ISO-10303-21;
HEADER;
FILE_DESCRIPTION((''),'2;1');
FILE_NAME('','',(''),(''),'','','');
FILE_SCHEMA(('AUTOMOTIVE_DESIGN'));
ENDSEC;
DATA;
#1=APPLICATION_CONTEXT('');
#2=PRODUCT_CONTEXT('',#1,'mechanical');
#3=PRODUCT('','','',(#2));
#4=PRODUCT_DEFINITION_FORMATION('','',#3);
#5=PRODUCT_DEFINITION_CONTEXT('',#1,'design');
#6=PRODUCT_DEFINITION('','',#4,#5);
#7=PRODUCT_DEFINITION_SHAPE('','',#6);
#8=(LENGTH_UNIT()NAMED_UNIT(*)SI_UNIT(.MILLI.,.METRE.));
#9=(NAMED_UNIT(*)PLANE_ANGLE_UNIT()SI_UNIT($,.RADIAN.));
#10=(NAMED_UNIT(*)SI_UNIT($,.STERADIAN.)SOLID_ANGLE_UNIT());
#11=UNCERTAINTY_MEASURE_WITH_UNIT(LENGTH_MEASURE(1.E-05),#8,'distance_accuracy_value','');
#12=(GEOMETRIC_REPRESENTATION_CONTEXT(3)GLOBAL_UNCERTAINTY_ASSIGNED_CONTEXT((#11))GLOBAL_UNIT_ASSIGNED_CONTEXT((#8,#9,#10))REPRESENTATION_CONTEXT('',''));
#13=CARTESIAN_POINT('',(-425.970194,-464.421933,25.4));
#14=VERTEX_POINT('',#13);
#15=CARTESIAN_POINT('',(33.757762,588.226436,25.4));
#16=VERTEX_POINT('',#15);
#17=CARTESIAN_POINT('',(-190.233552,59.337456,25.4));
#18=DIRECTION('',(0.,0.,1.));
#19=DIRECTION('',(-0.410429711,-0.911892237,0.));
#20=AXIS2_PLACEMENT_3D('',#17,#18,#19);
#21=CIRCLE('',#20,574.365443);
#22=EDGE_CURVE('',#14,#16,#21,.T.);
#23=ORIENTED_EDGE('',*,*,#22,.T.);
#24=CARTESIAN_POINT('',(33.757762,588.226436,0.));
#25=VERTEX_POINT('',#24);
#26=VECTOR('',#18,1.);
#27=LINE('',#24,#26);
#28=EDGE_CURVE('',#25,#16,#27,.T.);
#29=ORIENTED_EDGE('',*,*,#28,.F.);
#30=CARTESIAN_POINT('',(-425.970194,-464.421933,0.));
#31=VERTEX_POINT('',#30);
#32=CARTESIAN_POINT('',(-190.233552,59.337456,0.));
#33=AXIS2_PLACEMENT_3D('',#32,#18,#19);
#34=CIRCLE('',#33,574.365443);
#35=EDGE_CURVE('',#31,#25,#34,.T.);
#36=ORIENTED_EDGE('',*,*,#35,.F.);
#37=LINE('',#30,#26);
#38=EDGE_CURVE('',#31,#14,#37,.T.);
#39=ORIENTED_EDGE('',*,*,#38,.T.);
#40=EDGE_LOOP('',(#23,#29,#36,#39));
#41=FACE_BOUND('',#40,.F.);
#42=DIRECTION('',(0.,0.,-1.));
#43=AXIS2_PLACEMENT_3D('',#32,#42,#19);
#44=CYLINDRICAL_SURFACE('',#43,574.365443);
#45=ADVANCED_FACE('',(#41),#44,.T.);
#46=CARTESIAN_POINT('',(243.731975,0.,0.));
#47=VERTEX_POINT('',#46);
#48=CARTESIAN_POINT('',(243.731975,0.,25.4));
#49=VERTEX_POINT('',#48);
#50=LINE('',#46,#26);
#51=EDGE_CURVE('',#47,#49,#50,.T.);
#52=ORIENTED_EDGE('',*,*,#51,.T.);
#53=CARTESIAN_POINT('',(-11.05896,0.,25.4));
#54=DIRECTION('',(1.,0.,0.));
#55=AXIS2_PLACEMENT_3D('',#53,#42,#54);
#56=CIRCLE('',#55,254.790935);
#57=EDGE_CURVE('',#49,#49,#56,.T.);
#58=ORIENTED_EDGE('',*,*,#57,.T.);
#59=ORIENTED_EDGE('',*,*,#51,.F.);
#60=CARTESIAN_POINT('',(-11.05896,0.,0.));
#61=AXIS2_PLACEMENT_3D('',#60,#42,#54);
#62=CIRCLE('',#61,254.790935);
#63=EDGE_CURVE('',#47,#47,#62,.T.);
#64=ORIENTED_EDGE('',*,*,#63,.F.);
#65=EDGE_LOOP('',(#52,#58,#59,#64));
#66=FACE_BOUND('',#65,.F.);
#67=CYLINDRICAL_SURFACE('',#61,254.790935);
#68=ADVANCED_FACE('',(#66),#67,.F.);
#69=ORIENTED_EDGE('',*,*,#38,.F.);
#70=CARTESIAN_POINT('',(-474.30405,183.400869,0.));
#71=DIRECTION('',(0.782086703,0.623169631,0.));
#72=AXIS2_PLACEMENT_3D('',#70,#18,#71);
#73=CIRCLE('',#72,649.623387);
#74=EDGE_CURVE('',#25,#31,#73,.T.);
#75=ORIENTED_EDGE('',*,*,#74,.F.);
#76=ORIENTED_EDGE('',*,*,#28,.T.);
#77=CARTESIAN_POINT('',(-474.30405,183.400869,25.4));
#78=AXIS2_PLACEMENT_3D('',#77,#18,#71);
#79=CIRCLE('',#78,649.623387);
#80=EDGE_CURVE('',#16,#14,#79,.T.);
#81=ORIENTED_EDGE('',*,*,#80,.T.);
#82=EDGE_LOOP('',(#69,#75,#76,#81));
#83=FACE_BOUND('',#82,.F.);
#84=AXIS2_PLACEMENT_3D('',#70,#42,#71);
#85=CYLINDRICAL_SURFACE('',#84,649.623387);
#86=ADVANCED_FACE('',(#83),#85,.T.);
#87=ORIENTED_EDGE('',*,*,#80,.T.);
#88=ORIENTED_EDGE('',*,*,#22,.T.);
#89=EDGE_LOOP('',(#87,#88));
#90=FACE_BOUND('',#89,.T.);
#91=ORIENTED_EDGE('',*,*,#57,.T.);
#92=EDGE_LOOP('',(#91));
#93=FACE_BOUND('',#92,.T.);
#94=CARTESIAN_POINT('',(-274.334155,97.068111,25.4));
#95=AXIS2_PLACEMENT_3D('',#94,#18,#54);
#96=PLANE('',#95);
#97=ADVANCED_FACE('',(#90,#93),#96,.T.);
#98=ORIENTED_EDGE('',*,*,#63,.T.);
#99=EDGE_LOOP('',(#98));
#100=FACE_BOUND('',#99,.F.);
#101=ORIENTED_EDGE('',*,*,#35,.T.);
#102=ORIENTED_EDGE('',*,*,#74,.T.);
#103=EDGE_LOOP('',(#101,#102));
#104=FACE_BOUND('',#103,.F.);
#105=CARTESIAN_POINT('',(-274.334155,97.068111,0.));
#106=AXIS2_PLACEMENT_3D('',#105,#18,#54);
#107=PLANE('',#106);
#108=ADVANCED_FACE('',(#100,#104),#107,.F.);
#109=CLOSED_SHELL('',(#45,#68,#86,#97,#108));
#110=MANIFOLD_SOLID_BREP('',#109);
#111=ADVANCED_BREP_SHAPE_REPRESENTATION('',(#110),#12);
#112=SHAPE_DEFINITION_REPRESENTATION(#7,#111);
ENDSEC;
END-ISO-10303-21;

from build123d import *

# Parameters (mm, degrees)
F1_DEPTH = 25.4


with BuildPart() as f1:
    # F0 (on Top) → F1 (new body)
    with BuildSketch(Plane.XY):
        with BuildLine():
            ThreePointArc((5.7862824755, -254.2334721202), (-247.959476671, 93.7900080401), (175.2484512465, 173.8043990925))
            ThreePointArc((175.2484512465, 173.8043990925), (175.3016148465, 178.6025033331), (175.3193363689, 183.4008693695))
            ThreePointArc((175.3193363689, 183.4008693695), (138.9085473628, 397.8323376012), (33.7577623302, 588.2264355431))
            ThreePointArc((33.7577623302, 588.2264355431), (-716.5904978529, 289.2157423962), (-425.9701939676, -464.4219325814))
            ThreePointArc((-425.9701939676, -464.4219325814), (-189.9577330386, -400.6862100109), (5.7862824755, -254.2334721202))
        make_face()
        with BuildLine():
            ThreePointArc((175.3193363689, 183.4008693695), (175.3016148465, 178.6025033331), (175.2484512465, 173.8043990925))
            ThreePointArc((175.2484512465, 173.8043990925), (225.9936293263, 93.404981396), (243.7319752101, 0))
            ThreePointArc((243.7319752101, 0), (174.9658175696, -174.1068716602), (5.7862824755, -254.2334721202))
            ThreePointArc((5.7862824755, -254.2334721202), (-189.9577330386, -400.6862100109), (-425.9701939676, -464.4219325814))
            ThreePointArc((-425.9701939676, -464.4219325814), (121.6131099686, -422.9978230177), (384.131890946, 59.3374558464))
            ThreePointArc((384.131890946, 59.3374558464), (288.592372793, 376.5462131529), (33.7577623302, 588.2264355431))
            ThreePointArc((33.7577623302, 588.2264355431), (138.9085473628, 397.8323376012), (175.3193363689, 183.4008693695))
        make_face()
        with BuildLine():
            ThreePointArc((33.7577623302, 588.2264355431), (-1069.6284842657, 443.399643596), (-425.9701939676, -464.4219325814))
            ThreePointArc((-425.9701939676, -464.4219325814), (-716.5904978529, 289.2157423962), (33.7577623302, 588.2264355431))
        make_face()
    extrude(amount=F1_DEPTH)


solid = f1.part
